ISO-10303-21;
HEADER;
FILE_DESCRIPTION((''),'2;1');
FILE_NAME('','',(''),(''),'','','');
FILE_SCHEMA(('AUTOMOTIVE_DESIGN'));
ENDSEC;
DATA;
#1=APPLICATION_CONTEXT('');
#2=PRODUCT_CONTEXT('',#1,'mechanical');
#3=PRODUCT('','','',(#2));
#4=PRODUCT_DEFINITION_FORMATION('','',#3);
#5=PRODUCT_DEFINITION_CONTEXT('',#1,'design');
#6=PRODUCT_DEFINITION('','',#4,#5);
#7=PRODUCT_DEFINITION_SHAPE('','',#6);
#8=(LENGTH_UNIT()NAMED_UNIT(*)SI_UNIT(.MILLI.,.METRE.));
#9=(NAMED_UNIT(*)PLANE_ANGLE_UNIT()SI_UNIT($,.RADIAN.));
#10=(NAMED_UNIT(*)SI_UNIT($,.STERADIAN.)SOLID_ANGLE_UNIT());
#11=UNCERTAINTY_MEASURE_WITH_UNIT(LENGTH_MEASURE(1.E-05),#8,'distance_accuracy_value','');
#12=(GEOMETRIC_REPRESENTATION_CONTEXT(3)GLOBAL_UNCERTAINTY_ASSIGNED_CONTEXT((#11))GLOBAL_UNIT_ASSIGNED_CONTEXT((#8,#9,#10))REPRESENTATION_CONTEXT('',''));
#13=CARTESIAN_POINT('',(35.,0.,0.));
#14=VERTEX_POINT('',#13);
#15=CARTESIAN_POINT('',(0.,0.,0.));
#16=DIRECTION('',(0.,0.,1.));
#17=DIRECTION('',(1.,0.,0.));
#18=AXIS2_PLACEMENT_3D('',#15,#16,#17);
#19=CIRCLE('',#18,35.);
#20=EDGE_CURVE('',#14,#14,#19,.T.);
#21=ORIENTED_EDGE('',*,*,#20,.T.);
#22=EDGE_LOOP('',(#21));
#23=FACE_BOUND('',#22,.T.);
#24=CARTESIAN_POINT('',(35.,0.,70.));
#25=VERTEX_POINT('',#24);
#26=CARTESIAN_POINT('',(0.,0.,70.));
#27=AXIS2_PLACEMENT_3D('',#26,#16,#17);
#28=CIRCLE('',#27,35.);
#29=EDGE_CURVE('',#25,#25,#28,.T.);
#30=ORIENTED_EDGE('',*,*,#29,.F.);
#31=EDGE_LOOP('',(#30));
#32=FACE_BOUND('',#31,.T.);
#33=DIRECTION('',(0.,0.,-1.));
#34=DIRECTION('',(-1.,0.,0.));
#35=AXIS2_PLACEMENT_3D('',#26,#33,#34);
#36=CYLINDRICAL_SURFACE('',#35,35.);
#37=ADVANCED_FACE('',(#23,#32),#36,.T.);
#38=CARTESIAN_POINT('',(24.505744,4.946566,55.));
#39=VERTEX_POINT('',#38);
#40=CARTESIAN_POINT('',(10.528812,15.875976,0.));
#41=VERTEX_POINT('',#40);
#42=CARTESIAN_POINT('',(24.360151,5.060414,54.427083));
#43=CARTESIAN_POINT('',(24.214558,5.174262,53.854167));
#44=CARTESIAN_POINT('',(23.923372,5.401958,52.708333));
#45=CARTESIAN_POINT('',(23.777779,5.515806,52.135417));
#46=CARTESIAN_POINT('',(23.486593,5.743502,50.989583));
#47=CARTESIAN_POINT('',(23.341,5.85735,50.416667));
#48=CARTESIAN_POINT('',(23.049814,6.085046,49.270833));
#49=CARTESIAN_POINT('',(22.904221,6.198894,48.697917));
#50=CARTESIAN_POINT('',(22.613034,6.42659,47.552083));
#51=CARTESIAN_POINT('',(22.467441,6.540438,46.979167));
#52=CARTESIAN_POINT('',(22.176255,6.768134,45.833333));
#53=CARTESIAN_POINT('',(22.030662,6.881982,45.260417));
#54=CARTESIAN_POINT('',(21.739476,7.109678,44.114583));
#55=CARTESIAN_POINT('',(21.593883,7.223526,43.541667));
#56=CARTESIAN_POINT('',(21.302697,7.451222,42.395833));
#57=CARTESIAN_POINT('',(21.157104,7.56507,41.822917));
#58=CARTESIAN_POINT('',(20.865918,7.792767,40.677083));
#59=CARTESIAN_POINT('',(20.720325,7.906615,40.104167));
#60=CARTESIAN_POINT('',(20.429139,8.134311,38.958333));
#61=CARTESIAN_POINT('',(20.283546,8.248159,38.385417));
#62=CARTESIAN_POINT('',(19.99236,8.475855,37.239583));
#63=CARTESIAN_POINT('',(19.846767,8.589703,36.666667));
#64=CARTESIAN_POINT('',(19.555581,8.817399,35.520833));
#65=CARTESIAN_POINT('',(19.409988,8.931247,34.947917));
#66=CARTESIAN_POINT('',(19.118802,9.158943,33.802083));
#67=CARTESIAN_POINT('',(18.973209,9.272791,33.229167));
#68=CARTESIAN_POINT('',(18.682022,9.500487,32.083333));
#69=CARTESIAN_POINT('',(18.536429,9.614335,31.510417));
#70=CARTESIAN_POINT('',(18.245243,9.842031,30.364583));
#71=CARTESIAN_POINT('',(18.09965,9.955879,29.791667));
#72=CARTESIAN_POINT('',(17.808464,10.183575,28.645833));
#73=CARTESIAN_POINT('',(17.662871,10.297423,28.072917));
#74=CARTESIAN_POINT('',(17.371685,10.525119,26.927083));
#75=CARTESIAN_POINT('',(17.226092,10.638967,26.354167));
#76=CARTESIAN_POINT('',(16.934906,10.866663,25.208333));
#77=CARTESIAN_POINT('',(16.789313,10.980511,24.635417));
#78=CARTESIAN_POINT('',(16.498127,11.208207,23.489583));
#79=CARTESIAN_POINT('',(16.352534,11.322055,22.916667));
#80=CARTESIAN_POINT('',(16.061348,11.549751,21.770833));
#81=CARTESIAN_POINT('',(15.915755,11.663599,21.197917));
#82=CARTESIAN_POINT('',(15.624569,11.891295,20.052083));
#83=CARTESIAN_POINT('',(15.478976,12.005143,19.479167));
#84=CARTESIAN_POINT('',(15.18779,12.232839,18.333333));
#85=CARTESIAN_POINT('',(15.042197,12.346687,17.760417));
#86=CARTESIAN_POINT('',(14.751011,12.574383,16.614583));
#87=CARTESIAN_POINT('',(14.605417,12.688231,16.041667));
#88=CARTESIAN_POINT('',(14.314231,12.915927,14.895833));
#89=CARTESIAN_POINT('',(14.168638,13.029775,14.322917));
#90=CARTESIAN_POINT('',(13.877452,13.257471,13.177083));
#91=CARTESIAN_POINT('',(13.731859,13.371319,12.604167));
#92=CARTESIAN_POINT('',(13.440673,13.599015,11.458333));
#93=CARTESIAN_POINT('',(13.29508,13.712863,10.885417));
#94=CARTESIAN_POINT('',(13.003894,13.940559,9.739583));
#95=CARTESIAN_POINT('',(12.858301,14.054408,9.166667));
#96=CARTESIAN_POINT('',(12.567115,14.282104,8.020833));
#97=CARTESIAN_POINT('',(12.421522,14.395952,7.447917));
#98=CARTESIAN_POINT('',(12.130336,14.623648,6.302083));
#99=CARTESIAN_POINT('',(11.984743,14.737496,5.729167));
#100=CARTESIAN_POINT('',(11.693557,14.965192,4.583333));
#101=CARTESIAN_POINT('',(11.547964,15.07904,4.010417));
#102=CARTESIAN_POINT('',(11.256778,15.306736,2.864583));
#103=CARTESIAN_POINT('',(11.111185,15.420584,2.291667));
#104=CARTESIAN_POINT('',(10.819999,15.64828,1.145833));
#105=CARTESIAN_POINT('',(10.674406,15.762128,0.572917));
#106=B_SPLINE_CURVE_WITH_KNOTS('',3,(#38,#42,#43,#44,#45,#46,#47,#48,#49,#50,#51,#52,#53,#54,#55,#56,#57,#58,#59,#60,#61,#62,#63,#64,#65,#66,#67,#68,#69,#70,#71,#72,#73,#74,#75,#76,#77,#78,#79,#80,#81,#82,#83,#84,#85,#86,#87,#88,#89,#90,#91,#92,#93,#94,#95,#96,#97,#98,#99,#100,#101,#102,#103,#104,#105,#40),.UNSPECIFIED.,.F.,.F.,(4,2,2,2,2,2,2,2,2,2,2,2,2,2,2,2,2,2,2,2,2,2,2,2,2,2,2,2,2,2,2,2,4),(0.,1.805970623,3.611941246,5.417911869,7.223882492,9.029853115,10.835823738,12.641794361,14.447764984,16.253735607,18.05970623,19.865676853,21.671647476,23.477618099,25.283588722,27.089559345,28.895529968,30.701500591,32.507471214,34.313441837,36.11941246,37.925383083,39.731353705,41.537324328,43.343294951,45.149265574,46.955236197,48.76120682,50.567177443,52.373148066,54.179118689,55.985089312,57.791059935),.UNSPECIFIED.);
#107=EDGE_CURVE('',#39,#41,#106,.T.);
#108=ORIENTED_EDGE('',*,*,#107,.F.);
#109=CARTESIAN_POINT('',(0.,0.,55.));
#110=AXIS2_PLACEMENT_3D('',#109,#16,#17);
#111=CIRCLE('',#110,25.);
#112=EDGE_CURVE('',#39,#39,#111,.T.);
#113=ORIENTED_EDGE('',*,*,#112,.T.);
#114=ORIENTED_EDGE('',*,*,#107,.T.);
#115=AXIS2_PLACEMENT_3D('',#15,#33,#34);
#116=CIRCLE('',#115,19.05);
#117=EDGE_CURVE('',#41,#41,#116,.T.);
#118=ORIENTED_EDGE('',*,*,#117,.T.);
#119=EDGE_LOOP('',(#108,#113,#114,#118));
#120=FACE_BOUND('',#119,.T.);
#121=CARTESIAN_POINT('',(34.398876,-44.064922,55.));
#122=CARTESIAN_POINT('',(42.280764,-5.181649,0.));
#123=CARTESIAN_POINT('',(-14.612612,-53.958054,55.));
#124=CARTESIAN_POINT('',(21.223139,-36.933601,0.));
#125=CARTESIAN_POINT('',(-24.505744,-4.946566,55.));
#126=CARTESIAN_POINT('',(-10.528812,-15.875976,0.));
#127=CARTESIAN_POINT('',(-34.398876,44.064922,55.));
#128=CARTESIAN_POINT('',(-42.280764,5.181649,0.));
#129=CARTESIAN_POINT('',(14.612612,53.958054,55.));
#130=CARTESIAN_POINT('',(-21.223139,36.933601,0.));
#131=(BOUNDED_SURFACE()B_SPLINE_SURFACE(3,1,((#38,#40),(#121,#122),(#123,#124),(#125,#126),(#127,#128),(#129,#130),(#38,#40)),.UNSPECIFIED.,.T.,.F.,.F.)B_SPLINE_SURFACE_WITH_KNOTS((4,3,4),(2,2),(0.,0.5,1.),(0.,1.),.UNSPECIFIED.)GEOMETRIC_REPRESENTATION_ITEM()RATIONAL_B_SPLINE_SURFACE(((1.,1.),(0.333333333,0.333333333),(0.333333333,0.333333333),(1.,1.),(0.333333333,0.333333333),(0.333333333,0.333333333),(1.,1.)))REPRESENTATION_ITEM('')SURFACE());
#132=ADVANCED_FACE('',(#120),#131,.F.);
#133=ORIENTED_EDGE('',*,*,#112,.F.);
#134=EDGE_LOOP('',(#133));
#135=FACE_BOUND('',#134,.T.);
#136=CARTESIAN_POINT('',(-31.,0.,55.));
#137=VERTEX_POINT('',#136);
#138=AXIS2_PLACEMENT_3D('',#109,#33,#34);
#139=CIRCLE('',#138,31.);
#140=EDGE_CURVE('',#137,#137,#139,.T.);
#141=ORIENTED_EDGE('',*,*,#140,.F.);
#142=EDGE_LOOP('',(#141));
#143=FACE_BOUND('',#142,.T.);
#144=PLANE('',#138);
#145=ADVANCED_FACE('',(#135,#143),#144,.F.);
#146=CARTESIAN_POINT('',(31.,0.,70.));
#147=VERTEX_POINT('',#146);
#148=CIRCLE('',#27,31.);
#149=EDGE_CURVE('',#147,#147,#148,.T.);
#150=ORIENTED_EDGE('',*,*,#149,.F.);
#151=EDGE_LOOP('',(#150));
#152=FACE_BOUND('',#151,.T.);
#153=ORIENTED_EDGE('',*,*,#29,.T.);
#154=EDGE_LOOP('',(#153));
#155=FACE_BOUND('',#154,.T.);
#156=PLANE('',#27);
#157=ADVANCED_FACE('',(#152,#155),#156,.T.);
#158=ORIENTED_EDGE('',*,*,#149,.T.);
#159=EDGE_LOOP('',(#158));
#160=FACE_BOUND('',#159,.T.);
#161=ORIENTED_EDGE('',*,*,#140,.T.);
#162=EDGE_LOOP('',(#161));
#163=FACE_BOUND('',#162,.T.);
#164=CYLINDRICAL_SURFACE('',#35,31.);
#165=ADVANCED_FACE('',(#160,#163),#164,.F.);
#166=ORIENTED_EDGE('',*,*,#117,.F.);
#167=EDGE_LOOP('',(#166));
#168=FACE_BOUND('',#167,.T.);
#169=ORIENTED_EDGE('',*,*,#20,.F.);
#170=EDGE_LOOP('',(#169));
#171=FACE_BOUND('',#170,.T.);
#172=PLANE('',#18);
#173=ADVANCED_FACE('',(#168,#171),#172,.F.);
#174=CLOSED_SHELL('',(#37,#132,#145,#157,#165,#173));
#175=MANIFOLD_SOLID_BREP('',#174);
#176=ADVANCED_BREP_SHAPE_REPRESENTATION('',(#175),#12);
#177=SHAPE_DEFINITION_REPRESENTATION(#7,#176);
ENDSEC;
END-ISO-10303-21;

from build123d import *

# Parameters (mm, degrees)
CROQUIS1_R              = 35
CROQUIS1_R_2            = 31
SALIENTE_EXTRUIR1_DEPTH = 70
CROQUIS2_R              = 31
SALIENTE_EXTRUIR2_DEPTH = 55


with BuildPart() as part:
    # Croquis1 → Saliente-Extruir1 (new body)
    with BuildSketch(Plane.XY):
        Circle(CROQUIS1_R)
        Circle(CROQUIS1_R_2, mode=Mode.SUBTRACT)
    extrude(amount=SALIENTE_EXTRUIR1_DEPTH)

    # Croquis2 → Saliente-Extruir2 (add)
    with BuildSketch(Plane(origin=(0, 0, 0), x_dir=(-1, 0, 0), z_dir=(0, 0, -1))):
        Circle(CROQUIS2_R)
    extrude(amount=-SALIENTE_EXTRUIR2_DEPTH)

    # Cortar-Recubrir2: read off the stored shape, not the designer's step
    # Cortar-Recubrir2: loft between two sections, ruled curve by curve
    cortar_recubrir2_from = [
        Edge.make_bspline([(24.505743897, 4.946566089, 55), (34.398876075, -44.064921704, 55), (-14.612611719, -53.958053882, 55), (-24.505743897, -4.946566089, 55), (-34.398876075, 44.064921704, 55), (14.612611719, 53.958053882, 55), (24.505743897, 4.946566089, 55)], [0, 0, 0, 0, 0.5, 0.5, 0.5, 1, 1, 1, 1], 3, [1, 0.333333333, 0.333333333, 1, 0.333333333, 0.333333333, 1]),
    ]
    cortar_recubrir2_to = [
        Edge.make_bspline([(10.528812483, 15.875975803, 0), (42.280764089, -5.181649163, 0), (21.223139123, -36.933600769, 0), (-10.528812483, -15.875975803, 0), (-42.280764089, 5.181649163, 0), (-21.223139123, 36.933600769, 0), (10.528812483, 15.875975803, 0)], [0, 0, 0, 0, 0.5, 0.5, 0.5, 1, 1, 1, 1], 3, [1, 0.333333333, 0.333333333, 1, 0.333333333, 0.333333333, 1]),
    ]
    cortar_recubrir2 = Solid(Shell([*[Face.make_surface_from_curves(cortar_recubrir2_from[k], cortar_recubrir2_to[k]) for k in range(1)], Face(Wire(cortar_recubrir2_from)), Face(Wire(cortar_recubrir2_to))]))
    add(cortar_recubrir2, mode=Mode.SUBTRACT)


solid = part.part
